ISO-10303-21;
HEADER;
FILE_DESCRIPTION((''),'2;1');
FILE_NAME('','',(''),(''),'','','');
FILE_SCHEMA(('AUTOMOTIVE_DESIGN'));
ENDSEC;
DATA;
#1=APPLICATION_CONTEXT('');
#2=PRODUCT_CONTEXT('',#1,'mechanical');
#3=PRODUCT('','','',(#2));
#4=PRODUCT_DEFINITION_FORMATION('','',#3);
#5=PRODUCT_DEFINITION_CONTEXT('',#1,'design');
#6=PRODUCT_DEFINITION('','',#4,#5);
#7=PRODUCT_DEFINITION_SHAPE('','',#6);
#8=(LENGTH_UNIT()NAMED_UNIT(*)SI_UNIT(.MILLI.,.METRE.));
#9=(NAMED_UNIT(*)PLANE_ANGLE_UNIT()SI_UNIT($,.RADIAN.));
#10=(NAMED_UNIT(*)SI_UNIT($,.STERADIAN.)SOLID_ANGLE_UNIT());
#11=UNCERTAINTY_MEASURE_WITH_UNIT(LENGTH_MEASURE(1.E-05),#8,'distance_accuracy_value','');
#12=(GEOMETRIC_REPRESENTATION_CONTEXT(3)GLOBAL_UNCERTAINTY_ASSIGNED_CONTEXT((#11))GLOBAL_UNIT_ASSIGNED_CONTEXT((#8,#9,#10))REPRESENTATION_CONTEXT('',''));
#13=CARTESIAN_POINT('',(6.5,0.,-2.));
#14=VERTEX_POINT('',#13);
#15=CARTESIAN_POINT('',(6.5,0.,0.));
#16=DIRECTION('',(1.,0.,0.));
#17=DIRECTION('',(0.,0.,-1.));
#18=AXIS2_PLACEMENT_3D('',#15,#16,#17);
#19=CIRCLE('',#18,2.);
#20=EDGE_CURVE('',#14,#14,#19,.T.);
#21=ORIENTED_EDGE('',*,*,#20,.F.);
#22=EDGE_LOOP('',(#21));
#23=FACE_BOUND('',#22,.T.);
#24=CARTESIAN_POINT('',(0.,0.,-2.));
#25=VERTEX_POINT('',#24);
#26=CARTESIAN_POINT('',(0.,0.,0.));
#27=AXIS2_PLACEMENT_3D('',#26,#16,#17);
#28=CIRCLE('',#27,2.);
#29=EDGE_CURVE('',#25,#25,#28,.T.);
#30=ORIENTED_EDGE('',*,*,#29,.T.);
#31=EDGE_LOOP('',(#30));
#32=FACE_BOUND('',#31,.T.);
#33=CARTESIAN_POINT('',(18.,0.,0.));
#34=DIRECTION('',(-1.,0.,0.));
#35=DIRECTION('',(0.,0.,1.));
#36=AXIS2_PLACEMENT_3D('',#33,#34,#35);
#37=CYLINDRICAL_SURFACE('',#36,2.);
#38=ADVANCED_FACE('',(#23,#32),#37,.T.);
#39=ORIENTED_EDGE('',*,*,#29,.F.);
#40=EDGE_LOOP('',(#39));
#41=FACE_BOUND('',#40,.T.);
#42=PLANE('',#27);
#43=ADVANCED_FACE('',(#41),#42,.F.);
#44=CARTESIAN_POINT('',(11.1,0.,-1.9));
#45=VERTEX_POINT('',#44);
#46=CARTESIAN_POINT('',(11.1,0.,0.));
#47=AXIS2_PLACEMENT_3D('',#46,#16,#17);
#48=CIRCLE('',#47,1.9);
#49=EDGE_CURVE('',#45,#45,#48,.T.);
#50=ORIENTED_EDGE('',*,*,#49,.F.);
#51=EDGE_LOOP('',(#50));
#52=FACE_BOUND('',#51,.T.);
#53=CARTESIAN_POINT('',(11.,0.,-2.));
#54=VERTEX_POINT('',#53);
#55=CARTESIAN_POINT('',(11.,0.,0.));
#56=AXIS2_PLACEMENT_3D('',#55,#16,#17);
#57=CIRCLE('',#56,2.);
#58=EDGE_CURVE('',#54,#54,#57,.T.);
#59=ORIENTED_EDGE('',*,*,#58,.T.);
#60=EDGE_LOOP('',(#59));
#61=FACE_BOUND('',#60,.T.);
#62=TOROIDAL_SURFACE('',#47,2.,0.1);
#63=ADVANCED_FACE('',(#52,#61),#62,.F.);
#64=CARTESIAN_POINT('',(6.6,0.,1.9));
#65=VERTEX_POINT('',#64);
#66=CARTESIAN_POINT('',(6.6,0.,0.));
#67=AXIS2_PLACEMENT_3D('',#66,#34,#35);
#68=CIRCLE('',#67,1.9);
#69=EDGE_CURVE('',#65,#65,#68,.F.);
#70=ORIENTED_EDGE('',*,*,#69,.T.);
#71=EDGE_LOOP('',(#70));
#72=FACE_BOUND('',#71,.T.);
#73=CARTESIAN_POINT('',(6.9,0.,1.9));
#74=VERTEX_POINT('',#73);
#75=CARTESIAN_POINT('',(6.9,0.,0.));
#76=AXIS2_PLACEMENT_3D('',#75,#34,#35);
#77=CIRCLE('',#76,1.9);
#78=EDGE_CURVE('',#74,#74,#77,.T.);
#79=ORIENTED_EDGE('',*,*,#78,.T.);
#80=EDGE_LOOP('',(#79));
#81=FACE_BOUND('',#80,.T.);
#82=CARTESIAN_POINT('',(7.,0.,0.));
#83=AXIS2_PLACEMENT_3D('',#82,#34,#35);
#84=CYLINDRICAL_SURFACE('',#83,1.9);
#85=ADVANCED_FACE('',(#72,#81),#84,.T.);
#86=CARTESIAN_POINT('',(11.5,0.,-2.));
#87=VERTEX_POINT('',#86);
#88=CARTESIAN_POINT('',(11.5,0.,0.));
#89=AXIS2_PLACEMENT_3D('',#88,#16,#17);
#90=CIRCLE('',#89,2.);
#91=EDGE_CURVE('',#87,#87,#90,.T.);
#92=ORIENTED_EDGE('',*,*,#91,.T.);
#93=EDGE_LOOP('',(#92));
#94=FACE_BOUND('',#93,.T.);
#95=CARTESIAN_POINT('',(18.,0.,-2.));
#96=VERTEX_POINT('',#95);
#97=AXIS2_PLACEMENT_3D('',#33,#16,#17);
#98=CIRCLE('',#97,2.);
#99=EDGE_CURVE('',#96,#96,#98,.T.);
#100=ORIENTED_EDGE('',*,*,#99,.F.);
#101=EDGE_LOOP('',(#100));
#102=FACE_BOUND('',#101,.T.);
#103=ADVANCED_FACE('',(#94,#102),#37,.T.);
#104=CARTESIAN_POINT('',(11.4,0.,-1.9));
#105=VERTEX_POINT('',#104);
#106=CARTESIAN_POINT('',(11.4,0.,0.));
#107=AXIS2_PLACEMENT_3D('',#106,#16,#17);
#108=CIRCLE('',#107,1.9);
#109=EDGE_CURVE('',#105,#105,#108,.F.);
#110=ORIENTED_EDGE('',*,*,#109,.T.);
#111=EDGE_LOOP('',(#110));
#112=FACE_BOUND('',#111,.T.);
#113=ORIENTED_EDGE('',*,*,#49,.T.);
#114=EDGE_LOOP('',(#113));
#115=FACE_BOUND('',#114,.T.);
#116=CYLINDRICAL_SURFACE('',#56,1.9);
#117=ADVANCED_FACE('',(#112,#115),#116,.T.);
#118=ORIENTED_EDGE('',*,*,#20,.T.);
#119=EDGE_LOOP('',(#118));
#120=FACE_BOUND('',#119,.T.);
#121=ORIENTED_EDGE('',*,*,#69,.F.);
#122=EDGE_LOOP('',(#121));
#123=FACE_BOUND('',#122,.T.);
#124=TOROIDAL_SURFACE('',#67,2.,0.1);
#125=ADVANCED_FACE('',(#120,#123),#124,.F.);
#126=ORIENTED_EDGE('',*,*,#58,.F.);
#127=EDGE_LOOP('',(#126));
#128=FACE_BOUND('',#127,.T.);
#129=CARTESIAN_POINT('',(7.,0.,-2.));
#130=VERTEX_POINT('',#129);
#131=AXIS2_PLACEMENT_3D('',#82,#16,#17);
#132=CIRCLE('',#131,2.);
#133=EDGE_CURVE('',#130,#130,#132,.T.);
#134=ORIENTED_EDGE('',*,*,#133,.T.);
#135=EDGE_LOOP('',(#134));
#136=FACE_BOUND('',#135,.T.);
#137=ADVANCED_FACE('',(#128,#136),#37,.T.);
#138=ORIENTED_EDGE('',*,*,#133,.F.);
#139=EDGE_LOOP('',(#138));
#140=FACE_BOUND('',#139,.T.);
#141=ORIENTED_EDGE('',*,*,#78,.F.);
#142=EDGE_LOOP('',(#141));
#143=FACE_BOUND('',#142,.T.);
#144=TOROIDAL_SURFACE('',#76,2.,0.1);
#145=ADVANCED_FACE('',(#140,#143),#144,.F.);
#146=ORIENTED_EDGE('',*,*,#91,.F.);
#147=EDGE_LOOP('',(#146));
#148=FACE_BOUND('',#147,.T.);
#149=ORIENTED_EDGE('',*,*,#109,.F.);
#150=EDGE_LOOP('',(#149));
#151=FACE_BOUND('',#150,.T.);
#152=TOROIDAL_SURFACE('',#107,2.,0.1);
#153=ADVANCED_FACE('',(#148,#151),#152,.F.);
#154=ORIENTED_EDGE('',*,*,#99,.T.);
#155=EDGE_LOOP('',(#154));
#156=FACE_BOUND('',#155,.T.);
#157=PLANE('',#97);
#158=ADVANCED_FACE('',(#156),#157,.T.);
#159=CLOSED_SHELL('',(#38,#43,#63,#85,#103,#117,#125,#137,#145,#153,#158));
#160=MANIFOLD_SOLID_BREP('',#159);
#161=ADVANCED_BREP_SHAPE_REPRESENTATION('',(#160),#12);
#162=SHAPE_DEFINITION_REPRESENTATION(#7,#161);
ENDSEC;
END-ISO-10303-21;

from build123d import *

# Parameters (mm, degrees)
SKETCH_1_R          = 2
EXTRUDE_1_DEPTH     = 18
CUT_EXTRUDE_START   = -7
SKETCH_2_R          = 2
SKETCH_2_R_2        = 1.9
CUT_EXTRUDE_1_DEPTH = 0.5
FILLET_1_R          = 0.1


with BuildPart() as part:
    # 草图1 → 凸台-拉伸1 (new body)
    with BuildSketch(Plane(origin=(0, 0, 0), x_dir=(0, 0, -1), z_dir=(1, 0, 0))):
        Circle(SKETCH_1_R)
    extrude(amount=EXTRUDE_1_DEPTH)

    # 草图2 → 切除-拉伸1 (cut)
    with BuildSketch(Plane(origin=(18, 0, 0), x_dir=(0, 0, -1), z_dir=(1, 0, 0)).offset(CUT_EXTRUDE_START)):
        Circle(SKETCH_2_R)
        Circle(SKETCH_2_R_2, mode=Mode.SUBTRACT)
    cut_extrude_1 = extrude(amount=CUT_EXTRUDE_1_DEPTH, mode=Mode.SUBTRACT)

    # 镜向1: 切除-拉伸1 across plane
    add(cut_extrude_1.mirror(Plane(origin=(9, 0, 0), x_dir=(0, 0, 1), z_dir=(1, 0, 0))), mode=Mode.SUBTRACT)

    # 圆角1
    fillet_1_edges = [part.edges().sort_by_distance(p)[0] for p in [
        (6.5, 0, 1.9),
        (7, 0, 1.9),
        (11, 0, 1.9),
        (11.5, 0, 1.9),
    ]]
    fillet(fillet_1_edges, radius=FILLET_1_R - 0.0001)  # a hair under: the kernel refuses the full size


solid = part.part
